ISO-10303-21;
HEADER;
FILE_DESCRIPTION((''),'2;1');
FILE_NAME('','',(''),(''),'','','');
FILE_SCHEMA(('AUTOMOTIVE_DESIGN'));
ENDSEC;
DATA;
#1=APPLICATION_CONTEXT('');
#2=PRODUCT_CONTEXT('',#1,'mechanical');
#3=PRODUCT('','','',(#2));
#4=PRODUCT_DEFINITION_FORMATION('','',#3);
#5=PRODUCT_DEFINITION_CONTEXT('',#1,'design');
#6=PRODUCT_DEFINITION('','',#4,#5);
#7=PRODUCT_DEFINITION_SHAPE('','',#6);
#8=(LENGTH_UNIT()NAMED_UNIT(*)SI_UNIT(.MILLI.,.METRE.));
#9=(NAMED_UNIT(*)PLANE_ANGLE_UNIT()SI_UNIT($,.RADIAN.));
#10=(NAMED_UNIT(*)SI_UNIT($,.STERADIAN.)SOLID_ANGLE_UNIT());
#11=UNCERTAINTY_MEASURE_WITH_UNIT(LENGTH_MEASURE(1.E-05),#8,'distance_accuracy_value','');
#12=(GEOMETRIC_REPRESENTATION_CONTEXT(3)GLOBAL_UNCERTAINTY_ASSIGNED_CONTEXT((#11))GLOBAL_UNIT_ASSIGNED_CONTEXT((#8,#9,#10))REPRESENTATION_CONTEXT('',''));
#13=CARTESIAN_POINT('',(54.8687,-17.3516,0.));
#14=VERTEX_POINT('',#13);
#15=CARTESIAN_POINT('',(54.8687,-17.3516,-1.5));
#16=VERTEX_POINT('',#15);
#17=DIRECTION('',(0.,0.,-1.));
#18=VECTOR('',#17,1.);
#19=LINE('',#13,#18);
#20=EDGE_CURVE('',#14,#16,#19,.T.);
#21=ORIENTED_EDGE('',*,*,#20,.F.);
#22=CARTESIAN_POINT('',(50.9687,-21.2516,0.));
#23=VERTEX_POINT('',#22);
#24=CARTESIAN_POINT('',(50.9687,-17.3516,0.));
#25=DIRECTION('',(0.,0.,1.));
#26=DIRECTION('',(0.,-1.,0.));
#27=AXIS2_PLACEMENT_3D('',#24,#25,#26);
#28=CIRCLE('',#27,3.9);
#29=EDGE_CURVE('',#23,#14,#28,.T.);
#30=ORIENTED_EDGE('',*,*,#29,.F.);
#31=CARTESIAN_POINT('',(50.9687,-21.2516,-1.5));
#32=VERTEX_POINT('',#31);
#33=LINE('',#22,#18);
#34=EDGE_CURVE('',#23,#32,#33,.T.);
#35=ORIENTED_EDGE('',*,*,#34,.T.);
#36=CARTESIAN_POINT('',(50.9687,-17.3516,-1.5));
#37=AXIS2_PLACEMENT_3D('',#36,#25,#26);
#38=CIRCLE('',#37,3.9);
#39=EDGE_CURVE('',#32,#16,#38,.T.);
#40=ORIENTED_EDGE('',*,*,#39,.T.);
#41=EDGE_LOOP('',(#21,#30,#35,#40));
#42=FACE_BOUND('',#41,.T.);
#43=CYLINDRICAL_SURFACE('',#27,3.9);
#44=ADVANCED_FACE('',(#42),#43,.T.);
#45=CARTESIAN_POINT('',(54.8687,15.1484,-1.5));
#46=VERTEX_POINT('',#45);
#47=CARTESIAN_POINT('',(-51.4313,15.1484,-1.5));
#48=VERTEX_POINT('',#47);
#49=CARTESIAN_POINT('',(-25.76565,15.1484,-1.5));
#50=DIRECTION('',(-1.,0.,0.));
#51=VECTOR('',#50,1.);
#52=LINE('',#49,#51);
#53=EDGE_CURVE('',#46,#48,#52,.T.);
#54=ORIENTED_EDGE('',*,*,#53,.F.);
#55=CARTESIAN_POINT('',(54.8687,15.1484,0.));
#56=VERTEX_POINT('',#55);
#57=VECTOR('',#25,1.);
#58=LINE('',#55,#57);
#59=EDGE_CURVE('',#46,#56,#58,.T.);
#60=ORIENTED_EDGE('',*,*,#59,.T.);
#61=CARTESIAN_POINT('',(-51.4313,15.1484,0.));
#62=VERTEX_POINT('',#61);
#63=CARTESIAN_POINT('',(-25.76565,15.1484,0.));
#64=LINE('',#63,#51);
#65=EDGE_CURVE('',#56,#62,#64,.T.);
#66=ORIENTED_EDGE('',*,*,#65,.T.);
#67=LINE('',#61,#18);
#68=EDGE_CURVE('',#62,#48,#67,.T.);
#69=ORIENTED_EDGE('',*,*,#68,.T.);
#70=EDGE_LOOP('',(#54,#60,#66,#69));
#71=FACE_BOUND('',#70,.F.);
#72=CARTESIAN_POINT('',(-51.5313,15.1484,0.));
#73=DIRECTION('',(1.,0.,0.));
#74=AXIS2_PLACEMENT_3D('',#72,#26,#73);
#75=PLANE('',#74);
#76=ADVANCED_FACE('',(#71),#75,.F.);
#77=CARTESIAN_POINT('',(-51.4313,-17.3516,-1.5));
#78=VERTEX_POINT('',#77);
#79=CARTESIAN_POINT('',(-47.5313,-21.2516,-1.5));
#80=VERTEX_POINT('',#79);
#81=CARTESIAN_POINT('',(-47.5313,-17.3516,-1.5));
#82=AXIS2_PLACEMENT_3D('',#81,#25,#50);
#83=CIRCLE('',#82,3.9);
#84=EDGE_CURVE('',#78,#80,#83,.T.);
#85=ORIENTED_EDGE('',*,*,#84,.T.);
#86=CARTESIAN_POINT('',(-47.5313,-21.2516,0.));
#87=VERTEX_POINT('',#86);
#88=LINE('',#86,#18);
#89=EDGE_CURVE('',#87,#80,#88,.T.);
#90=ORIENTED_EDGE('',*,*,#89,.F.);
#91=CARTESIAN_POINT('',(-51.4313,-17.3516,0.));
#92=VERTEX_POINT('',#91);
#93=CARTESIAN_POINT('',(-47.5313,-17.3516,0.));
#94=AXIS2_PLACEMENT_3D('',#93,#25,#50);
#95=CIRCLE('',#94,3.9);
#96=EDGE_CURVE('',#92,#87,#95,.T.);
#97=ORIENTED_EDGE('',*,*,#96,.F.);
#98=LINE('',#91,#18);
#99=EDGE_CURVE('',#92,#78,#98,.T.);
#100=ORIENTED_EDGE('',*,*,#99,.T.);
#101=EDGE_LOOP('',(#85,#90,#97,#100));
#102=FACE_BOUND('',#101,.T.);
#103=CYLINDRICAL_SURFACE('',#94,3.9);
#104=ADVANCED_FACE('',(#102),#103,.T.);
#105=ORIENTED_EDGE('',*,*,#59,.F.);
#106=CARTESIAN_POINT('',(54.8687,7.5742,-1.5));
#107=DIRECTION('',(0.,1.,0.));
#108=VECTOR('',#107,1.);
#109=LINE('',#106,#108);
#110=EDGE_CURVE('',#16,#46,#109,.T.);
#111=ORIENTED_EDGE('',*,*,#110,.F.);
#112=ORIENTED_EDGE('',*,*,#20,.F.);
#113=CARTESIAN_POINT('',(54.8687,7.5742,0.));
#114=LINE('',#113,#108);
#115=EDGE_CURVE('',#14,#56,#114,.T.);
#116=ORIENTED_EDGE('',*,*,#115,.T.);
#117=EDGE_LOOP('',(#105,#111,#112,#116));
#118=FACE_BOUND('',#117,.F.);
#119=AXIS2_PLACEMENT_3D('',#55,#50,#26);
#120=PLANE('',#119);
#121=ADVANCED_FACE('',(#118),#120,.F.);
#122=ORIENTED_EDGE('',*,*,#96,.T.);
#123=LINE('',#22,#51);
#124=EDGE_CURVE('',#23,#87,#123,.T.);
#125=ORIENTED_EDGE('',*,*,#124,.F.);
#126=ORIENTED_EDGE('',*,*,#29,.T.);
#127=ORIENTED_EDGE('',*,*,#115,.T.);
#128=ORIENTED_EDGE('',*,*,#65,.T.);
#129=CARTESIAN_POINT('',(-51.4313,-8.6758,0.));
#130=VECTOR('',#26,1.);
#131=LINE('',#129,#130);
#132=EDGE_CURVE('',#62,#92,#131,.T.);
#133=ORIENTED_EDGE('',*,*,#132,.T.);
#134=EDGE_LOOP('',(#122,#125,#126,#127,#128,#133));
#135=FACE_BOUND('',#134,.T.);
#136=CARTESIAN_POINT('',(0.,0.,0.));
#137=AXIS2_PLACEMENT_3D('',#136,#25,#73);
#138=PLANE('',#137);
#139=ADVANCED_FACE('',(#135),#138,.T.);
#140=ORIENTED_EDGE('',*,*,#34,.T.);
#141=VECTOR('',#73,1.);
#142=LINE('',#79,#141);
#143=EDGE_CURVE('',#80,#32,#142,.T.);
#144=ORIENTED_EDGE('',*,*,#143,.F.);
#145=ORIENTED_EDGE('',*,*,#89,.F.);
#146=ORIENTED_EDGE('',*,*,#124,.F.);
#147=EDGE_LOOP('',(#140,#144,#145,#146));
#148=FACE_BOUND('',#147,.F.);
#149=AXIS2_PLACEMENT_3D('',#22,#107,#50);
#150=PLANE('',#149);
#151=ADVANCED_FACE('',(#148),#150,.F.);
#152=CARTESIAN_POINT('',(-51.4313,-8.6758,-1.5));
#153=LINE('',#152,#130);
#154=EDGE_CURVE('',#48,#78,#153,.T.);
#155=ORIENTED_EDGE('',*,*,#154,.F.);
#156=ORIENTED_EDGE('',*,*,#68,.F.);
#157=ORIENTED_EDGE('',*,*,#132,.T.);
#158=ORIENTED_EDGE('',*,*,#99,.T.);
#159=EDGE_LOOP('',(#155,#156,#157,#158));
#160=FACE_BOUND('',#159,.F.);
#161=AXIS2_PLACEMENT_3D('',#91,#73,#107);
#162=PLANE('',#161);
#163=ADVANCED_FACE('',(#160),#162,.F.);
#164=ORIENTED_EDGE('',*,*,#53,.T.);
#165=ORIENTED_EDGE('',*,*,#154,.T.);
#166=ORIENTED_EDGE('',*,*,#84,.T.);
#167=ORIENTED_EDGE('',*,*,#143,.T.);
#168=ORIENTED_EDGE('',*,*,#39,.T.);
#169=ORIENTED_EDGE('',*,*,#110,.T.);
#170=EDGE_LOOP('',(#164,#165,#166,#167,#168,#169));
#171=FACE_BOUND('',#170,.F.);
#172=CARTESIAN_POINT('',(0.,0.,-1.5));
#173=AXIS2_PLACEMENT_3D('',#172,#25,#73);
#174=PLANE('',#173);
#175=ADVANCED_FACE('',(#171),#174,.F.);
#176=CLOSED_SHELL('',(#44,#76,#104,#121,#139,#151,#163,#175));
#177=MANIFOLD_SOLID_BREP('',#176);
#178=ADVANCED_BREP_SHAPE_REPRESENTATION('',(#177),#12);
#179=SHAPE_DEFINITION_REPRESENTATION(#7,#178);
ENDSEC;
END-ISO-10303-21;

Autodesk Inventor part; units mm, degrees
ref_plane "YZ Plane" through (0, 0, 0) normal (1, 0, 0) x (0, 1, 0)
ref_plane "XZ Plane" through (0, 0, 0) normal (0, 1, 0) x (-1, 0, 0)
ref_plane "XY Plane" through (0, 0, 0) normal (0, 0, 1) x (1, 0, 0)
ref_plane "Work Plane1" through (0, 0, 0) normal (0, 0, 1) x (1, 0, 0)
sketch "Sketch1" plane through (0, 0, 0) normal (0, 0, 1) x (1, 0, 0)
  line L0 (54.9687, 15.1484) -> (54.9687, -17.3516) projected
  arc A0 (50.9687, -21.3516) -> (54.9687, -17.3516) centre (50.9687, -17.3516) ccw projected
  line L1 (50.9687, -21.3516) -> (-21.0313, -21.3516) projected
  line L2 (54.9687, -22.8516) -> (-21.0313, -22.8516) projected
  arc A1 (54.9687, -22.8516) -> (55.9687, -21.8516) centre (54.9687, -21.8516) ccw projected
  line L3 (55.9687, 15.1484) -> (55.9687, -21.8516) projected
  line L4 (54.9687, 15.1484) -> (55.9687, 15.1484) projected
  line L5 (-51.5313, 15.1484) -> (54.9687, 15.1484)
  line L6 (-21.0313, -21.3516) -> (-21.0313, -22.8516) projected
  line L7 (-36.0313, -22.8516) -> (-36.0313, -21.3516) projected
  line L8 (-36.0313, -21.3516) -> (-47.5313, -21.3516) projected
  arc A2 (-51.5313, -17.3516) -> (-47.5313, -21.3516) centre (-47.5313, -17.3516) ccw projected
  line L9 (-51.5313, -17.3516) -> (-51.5313, 15.1484) projected
  line L10 (-54.0313, 15.1484) -> (-51.5313, 15.1484) projected
  line L11 (-54.0313, -21.8516) -> (-54.0313, 15.1484) projected
  arc A3 (-54.0313, -21.8516) -> (-53.0313, -22.8516) centre (-53.0313, -21.8516) ccw projected
  line L12 (-36.0313, -22.8516) -> (-53.0313, -22.8516) projected
  line L13 (-36.0313, -21.3516) -> (-21.0313, -21.3516)
  point P0 (0, 0)
extrude "Extrusion1" add sketch "Sketch1" against normal blind 1.5 contours L0 A0 L1 L13 L8 A2 L9 L5
thicken "Thicken1" operation add thickness 0.1 both sides no extend neighbours yes toward (-1, 0, 0) faces at (54.9687, -6.5183, -0.5) (53.222, -20.6566, -1) (2.9687, -21.3516, -0.5) (-50.4635, -20.0723, -1) (-51.5313, 4.3151, -0.5)
properties part number "NEW_COVER_220DET_SMALL_COVER"
